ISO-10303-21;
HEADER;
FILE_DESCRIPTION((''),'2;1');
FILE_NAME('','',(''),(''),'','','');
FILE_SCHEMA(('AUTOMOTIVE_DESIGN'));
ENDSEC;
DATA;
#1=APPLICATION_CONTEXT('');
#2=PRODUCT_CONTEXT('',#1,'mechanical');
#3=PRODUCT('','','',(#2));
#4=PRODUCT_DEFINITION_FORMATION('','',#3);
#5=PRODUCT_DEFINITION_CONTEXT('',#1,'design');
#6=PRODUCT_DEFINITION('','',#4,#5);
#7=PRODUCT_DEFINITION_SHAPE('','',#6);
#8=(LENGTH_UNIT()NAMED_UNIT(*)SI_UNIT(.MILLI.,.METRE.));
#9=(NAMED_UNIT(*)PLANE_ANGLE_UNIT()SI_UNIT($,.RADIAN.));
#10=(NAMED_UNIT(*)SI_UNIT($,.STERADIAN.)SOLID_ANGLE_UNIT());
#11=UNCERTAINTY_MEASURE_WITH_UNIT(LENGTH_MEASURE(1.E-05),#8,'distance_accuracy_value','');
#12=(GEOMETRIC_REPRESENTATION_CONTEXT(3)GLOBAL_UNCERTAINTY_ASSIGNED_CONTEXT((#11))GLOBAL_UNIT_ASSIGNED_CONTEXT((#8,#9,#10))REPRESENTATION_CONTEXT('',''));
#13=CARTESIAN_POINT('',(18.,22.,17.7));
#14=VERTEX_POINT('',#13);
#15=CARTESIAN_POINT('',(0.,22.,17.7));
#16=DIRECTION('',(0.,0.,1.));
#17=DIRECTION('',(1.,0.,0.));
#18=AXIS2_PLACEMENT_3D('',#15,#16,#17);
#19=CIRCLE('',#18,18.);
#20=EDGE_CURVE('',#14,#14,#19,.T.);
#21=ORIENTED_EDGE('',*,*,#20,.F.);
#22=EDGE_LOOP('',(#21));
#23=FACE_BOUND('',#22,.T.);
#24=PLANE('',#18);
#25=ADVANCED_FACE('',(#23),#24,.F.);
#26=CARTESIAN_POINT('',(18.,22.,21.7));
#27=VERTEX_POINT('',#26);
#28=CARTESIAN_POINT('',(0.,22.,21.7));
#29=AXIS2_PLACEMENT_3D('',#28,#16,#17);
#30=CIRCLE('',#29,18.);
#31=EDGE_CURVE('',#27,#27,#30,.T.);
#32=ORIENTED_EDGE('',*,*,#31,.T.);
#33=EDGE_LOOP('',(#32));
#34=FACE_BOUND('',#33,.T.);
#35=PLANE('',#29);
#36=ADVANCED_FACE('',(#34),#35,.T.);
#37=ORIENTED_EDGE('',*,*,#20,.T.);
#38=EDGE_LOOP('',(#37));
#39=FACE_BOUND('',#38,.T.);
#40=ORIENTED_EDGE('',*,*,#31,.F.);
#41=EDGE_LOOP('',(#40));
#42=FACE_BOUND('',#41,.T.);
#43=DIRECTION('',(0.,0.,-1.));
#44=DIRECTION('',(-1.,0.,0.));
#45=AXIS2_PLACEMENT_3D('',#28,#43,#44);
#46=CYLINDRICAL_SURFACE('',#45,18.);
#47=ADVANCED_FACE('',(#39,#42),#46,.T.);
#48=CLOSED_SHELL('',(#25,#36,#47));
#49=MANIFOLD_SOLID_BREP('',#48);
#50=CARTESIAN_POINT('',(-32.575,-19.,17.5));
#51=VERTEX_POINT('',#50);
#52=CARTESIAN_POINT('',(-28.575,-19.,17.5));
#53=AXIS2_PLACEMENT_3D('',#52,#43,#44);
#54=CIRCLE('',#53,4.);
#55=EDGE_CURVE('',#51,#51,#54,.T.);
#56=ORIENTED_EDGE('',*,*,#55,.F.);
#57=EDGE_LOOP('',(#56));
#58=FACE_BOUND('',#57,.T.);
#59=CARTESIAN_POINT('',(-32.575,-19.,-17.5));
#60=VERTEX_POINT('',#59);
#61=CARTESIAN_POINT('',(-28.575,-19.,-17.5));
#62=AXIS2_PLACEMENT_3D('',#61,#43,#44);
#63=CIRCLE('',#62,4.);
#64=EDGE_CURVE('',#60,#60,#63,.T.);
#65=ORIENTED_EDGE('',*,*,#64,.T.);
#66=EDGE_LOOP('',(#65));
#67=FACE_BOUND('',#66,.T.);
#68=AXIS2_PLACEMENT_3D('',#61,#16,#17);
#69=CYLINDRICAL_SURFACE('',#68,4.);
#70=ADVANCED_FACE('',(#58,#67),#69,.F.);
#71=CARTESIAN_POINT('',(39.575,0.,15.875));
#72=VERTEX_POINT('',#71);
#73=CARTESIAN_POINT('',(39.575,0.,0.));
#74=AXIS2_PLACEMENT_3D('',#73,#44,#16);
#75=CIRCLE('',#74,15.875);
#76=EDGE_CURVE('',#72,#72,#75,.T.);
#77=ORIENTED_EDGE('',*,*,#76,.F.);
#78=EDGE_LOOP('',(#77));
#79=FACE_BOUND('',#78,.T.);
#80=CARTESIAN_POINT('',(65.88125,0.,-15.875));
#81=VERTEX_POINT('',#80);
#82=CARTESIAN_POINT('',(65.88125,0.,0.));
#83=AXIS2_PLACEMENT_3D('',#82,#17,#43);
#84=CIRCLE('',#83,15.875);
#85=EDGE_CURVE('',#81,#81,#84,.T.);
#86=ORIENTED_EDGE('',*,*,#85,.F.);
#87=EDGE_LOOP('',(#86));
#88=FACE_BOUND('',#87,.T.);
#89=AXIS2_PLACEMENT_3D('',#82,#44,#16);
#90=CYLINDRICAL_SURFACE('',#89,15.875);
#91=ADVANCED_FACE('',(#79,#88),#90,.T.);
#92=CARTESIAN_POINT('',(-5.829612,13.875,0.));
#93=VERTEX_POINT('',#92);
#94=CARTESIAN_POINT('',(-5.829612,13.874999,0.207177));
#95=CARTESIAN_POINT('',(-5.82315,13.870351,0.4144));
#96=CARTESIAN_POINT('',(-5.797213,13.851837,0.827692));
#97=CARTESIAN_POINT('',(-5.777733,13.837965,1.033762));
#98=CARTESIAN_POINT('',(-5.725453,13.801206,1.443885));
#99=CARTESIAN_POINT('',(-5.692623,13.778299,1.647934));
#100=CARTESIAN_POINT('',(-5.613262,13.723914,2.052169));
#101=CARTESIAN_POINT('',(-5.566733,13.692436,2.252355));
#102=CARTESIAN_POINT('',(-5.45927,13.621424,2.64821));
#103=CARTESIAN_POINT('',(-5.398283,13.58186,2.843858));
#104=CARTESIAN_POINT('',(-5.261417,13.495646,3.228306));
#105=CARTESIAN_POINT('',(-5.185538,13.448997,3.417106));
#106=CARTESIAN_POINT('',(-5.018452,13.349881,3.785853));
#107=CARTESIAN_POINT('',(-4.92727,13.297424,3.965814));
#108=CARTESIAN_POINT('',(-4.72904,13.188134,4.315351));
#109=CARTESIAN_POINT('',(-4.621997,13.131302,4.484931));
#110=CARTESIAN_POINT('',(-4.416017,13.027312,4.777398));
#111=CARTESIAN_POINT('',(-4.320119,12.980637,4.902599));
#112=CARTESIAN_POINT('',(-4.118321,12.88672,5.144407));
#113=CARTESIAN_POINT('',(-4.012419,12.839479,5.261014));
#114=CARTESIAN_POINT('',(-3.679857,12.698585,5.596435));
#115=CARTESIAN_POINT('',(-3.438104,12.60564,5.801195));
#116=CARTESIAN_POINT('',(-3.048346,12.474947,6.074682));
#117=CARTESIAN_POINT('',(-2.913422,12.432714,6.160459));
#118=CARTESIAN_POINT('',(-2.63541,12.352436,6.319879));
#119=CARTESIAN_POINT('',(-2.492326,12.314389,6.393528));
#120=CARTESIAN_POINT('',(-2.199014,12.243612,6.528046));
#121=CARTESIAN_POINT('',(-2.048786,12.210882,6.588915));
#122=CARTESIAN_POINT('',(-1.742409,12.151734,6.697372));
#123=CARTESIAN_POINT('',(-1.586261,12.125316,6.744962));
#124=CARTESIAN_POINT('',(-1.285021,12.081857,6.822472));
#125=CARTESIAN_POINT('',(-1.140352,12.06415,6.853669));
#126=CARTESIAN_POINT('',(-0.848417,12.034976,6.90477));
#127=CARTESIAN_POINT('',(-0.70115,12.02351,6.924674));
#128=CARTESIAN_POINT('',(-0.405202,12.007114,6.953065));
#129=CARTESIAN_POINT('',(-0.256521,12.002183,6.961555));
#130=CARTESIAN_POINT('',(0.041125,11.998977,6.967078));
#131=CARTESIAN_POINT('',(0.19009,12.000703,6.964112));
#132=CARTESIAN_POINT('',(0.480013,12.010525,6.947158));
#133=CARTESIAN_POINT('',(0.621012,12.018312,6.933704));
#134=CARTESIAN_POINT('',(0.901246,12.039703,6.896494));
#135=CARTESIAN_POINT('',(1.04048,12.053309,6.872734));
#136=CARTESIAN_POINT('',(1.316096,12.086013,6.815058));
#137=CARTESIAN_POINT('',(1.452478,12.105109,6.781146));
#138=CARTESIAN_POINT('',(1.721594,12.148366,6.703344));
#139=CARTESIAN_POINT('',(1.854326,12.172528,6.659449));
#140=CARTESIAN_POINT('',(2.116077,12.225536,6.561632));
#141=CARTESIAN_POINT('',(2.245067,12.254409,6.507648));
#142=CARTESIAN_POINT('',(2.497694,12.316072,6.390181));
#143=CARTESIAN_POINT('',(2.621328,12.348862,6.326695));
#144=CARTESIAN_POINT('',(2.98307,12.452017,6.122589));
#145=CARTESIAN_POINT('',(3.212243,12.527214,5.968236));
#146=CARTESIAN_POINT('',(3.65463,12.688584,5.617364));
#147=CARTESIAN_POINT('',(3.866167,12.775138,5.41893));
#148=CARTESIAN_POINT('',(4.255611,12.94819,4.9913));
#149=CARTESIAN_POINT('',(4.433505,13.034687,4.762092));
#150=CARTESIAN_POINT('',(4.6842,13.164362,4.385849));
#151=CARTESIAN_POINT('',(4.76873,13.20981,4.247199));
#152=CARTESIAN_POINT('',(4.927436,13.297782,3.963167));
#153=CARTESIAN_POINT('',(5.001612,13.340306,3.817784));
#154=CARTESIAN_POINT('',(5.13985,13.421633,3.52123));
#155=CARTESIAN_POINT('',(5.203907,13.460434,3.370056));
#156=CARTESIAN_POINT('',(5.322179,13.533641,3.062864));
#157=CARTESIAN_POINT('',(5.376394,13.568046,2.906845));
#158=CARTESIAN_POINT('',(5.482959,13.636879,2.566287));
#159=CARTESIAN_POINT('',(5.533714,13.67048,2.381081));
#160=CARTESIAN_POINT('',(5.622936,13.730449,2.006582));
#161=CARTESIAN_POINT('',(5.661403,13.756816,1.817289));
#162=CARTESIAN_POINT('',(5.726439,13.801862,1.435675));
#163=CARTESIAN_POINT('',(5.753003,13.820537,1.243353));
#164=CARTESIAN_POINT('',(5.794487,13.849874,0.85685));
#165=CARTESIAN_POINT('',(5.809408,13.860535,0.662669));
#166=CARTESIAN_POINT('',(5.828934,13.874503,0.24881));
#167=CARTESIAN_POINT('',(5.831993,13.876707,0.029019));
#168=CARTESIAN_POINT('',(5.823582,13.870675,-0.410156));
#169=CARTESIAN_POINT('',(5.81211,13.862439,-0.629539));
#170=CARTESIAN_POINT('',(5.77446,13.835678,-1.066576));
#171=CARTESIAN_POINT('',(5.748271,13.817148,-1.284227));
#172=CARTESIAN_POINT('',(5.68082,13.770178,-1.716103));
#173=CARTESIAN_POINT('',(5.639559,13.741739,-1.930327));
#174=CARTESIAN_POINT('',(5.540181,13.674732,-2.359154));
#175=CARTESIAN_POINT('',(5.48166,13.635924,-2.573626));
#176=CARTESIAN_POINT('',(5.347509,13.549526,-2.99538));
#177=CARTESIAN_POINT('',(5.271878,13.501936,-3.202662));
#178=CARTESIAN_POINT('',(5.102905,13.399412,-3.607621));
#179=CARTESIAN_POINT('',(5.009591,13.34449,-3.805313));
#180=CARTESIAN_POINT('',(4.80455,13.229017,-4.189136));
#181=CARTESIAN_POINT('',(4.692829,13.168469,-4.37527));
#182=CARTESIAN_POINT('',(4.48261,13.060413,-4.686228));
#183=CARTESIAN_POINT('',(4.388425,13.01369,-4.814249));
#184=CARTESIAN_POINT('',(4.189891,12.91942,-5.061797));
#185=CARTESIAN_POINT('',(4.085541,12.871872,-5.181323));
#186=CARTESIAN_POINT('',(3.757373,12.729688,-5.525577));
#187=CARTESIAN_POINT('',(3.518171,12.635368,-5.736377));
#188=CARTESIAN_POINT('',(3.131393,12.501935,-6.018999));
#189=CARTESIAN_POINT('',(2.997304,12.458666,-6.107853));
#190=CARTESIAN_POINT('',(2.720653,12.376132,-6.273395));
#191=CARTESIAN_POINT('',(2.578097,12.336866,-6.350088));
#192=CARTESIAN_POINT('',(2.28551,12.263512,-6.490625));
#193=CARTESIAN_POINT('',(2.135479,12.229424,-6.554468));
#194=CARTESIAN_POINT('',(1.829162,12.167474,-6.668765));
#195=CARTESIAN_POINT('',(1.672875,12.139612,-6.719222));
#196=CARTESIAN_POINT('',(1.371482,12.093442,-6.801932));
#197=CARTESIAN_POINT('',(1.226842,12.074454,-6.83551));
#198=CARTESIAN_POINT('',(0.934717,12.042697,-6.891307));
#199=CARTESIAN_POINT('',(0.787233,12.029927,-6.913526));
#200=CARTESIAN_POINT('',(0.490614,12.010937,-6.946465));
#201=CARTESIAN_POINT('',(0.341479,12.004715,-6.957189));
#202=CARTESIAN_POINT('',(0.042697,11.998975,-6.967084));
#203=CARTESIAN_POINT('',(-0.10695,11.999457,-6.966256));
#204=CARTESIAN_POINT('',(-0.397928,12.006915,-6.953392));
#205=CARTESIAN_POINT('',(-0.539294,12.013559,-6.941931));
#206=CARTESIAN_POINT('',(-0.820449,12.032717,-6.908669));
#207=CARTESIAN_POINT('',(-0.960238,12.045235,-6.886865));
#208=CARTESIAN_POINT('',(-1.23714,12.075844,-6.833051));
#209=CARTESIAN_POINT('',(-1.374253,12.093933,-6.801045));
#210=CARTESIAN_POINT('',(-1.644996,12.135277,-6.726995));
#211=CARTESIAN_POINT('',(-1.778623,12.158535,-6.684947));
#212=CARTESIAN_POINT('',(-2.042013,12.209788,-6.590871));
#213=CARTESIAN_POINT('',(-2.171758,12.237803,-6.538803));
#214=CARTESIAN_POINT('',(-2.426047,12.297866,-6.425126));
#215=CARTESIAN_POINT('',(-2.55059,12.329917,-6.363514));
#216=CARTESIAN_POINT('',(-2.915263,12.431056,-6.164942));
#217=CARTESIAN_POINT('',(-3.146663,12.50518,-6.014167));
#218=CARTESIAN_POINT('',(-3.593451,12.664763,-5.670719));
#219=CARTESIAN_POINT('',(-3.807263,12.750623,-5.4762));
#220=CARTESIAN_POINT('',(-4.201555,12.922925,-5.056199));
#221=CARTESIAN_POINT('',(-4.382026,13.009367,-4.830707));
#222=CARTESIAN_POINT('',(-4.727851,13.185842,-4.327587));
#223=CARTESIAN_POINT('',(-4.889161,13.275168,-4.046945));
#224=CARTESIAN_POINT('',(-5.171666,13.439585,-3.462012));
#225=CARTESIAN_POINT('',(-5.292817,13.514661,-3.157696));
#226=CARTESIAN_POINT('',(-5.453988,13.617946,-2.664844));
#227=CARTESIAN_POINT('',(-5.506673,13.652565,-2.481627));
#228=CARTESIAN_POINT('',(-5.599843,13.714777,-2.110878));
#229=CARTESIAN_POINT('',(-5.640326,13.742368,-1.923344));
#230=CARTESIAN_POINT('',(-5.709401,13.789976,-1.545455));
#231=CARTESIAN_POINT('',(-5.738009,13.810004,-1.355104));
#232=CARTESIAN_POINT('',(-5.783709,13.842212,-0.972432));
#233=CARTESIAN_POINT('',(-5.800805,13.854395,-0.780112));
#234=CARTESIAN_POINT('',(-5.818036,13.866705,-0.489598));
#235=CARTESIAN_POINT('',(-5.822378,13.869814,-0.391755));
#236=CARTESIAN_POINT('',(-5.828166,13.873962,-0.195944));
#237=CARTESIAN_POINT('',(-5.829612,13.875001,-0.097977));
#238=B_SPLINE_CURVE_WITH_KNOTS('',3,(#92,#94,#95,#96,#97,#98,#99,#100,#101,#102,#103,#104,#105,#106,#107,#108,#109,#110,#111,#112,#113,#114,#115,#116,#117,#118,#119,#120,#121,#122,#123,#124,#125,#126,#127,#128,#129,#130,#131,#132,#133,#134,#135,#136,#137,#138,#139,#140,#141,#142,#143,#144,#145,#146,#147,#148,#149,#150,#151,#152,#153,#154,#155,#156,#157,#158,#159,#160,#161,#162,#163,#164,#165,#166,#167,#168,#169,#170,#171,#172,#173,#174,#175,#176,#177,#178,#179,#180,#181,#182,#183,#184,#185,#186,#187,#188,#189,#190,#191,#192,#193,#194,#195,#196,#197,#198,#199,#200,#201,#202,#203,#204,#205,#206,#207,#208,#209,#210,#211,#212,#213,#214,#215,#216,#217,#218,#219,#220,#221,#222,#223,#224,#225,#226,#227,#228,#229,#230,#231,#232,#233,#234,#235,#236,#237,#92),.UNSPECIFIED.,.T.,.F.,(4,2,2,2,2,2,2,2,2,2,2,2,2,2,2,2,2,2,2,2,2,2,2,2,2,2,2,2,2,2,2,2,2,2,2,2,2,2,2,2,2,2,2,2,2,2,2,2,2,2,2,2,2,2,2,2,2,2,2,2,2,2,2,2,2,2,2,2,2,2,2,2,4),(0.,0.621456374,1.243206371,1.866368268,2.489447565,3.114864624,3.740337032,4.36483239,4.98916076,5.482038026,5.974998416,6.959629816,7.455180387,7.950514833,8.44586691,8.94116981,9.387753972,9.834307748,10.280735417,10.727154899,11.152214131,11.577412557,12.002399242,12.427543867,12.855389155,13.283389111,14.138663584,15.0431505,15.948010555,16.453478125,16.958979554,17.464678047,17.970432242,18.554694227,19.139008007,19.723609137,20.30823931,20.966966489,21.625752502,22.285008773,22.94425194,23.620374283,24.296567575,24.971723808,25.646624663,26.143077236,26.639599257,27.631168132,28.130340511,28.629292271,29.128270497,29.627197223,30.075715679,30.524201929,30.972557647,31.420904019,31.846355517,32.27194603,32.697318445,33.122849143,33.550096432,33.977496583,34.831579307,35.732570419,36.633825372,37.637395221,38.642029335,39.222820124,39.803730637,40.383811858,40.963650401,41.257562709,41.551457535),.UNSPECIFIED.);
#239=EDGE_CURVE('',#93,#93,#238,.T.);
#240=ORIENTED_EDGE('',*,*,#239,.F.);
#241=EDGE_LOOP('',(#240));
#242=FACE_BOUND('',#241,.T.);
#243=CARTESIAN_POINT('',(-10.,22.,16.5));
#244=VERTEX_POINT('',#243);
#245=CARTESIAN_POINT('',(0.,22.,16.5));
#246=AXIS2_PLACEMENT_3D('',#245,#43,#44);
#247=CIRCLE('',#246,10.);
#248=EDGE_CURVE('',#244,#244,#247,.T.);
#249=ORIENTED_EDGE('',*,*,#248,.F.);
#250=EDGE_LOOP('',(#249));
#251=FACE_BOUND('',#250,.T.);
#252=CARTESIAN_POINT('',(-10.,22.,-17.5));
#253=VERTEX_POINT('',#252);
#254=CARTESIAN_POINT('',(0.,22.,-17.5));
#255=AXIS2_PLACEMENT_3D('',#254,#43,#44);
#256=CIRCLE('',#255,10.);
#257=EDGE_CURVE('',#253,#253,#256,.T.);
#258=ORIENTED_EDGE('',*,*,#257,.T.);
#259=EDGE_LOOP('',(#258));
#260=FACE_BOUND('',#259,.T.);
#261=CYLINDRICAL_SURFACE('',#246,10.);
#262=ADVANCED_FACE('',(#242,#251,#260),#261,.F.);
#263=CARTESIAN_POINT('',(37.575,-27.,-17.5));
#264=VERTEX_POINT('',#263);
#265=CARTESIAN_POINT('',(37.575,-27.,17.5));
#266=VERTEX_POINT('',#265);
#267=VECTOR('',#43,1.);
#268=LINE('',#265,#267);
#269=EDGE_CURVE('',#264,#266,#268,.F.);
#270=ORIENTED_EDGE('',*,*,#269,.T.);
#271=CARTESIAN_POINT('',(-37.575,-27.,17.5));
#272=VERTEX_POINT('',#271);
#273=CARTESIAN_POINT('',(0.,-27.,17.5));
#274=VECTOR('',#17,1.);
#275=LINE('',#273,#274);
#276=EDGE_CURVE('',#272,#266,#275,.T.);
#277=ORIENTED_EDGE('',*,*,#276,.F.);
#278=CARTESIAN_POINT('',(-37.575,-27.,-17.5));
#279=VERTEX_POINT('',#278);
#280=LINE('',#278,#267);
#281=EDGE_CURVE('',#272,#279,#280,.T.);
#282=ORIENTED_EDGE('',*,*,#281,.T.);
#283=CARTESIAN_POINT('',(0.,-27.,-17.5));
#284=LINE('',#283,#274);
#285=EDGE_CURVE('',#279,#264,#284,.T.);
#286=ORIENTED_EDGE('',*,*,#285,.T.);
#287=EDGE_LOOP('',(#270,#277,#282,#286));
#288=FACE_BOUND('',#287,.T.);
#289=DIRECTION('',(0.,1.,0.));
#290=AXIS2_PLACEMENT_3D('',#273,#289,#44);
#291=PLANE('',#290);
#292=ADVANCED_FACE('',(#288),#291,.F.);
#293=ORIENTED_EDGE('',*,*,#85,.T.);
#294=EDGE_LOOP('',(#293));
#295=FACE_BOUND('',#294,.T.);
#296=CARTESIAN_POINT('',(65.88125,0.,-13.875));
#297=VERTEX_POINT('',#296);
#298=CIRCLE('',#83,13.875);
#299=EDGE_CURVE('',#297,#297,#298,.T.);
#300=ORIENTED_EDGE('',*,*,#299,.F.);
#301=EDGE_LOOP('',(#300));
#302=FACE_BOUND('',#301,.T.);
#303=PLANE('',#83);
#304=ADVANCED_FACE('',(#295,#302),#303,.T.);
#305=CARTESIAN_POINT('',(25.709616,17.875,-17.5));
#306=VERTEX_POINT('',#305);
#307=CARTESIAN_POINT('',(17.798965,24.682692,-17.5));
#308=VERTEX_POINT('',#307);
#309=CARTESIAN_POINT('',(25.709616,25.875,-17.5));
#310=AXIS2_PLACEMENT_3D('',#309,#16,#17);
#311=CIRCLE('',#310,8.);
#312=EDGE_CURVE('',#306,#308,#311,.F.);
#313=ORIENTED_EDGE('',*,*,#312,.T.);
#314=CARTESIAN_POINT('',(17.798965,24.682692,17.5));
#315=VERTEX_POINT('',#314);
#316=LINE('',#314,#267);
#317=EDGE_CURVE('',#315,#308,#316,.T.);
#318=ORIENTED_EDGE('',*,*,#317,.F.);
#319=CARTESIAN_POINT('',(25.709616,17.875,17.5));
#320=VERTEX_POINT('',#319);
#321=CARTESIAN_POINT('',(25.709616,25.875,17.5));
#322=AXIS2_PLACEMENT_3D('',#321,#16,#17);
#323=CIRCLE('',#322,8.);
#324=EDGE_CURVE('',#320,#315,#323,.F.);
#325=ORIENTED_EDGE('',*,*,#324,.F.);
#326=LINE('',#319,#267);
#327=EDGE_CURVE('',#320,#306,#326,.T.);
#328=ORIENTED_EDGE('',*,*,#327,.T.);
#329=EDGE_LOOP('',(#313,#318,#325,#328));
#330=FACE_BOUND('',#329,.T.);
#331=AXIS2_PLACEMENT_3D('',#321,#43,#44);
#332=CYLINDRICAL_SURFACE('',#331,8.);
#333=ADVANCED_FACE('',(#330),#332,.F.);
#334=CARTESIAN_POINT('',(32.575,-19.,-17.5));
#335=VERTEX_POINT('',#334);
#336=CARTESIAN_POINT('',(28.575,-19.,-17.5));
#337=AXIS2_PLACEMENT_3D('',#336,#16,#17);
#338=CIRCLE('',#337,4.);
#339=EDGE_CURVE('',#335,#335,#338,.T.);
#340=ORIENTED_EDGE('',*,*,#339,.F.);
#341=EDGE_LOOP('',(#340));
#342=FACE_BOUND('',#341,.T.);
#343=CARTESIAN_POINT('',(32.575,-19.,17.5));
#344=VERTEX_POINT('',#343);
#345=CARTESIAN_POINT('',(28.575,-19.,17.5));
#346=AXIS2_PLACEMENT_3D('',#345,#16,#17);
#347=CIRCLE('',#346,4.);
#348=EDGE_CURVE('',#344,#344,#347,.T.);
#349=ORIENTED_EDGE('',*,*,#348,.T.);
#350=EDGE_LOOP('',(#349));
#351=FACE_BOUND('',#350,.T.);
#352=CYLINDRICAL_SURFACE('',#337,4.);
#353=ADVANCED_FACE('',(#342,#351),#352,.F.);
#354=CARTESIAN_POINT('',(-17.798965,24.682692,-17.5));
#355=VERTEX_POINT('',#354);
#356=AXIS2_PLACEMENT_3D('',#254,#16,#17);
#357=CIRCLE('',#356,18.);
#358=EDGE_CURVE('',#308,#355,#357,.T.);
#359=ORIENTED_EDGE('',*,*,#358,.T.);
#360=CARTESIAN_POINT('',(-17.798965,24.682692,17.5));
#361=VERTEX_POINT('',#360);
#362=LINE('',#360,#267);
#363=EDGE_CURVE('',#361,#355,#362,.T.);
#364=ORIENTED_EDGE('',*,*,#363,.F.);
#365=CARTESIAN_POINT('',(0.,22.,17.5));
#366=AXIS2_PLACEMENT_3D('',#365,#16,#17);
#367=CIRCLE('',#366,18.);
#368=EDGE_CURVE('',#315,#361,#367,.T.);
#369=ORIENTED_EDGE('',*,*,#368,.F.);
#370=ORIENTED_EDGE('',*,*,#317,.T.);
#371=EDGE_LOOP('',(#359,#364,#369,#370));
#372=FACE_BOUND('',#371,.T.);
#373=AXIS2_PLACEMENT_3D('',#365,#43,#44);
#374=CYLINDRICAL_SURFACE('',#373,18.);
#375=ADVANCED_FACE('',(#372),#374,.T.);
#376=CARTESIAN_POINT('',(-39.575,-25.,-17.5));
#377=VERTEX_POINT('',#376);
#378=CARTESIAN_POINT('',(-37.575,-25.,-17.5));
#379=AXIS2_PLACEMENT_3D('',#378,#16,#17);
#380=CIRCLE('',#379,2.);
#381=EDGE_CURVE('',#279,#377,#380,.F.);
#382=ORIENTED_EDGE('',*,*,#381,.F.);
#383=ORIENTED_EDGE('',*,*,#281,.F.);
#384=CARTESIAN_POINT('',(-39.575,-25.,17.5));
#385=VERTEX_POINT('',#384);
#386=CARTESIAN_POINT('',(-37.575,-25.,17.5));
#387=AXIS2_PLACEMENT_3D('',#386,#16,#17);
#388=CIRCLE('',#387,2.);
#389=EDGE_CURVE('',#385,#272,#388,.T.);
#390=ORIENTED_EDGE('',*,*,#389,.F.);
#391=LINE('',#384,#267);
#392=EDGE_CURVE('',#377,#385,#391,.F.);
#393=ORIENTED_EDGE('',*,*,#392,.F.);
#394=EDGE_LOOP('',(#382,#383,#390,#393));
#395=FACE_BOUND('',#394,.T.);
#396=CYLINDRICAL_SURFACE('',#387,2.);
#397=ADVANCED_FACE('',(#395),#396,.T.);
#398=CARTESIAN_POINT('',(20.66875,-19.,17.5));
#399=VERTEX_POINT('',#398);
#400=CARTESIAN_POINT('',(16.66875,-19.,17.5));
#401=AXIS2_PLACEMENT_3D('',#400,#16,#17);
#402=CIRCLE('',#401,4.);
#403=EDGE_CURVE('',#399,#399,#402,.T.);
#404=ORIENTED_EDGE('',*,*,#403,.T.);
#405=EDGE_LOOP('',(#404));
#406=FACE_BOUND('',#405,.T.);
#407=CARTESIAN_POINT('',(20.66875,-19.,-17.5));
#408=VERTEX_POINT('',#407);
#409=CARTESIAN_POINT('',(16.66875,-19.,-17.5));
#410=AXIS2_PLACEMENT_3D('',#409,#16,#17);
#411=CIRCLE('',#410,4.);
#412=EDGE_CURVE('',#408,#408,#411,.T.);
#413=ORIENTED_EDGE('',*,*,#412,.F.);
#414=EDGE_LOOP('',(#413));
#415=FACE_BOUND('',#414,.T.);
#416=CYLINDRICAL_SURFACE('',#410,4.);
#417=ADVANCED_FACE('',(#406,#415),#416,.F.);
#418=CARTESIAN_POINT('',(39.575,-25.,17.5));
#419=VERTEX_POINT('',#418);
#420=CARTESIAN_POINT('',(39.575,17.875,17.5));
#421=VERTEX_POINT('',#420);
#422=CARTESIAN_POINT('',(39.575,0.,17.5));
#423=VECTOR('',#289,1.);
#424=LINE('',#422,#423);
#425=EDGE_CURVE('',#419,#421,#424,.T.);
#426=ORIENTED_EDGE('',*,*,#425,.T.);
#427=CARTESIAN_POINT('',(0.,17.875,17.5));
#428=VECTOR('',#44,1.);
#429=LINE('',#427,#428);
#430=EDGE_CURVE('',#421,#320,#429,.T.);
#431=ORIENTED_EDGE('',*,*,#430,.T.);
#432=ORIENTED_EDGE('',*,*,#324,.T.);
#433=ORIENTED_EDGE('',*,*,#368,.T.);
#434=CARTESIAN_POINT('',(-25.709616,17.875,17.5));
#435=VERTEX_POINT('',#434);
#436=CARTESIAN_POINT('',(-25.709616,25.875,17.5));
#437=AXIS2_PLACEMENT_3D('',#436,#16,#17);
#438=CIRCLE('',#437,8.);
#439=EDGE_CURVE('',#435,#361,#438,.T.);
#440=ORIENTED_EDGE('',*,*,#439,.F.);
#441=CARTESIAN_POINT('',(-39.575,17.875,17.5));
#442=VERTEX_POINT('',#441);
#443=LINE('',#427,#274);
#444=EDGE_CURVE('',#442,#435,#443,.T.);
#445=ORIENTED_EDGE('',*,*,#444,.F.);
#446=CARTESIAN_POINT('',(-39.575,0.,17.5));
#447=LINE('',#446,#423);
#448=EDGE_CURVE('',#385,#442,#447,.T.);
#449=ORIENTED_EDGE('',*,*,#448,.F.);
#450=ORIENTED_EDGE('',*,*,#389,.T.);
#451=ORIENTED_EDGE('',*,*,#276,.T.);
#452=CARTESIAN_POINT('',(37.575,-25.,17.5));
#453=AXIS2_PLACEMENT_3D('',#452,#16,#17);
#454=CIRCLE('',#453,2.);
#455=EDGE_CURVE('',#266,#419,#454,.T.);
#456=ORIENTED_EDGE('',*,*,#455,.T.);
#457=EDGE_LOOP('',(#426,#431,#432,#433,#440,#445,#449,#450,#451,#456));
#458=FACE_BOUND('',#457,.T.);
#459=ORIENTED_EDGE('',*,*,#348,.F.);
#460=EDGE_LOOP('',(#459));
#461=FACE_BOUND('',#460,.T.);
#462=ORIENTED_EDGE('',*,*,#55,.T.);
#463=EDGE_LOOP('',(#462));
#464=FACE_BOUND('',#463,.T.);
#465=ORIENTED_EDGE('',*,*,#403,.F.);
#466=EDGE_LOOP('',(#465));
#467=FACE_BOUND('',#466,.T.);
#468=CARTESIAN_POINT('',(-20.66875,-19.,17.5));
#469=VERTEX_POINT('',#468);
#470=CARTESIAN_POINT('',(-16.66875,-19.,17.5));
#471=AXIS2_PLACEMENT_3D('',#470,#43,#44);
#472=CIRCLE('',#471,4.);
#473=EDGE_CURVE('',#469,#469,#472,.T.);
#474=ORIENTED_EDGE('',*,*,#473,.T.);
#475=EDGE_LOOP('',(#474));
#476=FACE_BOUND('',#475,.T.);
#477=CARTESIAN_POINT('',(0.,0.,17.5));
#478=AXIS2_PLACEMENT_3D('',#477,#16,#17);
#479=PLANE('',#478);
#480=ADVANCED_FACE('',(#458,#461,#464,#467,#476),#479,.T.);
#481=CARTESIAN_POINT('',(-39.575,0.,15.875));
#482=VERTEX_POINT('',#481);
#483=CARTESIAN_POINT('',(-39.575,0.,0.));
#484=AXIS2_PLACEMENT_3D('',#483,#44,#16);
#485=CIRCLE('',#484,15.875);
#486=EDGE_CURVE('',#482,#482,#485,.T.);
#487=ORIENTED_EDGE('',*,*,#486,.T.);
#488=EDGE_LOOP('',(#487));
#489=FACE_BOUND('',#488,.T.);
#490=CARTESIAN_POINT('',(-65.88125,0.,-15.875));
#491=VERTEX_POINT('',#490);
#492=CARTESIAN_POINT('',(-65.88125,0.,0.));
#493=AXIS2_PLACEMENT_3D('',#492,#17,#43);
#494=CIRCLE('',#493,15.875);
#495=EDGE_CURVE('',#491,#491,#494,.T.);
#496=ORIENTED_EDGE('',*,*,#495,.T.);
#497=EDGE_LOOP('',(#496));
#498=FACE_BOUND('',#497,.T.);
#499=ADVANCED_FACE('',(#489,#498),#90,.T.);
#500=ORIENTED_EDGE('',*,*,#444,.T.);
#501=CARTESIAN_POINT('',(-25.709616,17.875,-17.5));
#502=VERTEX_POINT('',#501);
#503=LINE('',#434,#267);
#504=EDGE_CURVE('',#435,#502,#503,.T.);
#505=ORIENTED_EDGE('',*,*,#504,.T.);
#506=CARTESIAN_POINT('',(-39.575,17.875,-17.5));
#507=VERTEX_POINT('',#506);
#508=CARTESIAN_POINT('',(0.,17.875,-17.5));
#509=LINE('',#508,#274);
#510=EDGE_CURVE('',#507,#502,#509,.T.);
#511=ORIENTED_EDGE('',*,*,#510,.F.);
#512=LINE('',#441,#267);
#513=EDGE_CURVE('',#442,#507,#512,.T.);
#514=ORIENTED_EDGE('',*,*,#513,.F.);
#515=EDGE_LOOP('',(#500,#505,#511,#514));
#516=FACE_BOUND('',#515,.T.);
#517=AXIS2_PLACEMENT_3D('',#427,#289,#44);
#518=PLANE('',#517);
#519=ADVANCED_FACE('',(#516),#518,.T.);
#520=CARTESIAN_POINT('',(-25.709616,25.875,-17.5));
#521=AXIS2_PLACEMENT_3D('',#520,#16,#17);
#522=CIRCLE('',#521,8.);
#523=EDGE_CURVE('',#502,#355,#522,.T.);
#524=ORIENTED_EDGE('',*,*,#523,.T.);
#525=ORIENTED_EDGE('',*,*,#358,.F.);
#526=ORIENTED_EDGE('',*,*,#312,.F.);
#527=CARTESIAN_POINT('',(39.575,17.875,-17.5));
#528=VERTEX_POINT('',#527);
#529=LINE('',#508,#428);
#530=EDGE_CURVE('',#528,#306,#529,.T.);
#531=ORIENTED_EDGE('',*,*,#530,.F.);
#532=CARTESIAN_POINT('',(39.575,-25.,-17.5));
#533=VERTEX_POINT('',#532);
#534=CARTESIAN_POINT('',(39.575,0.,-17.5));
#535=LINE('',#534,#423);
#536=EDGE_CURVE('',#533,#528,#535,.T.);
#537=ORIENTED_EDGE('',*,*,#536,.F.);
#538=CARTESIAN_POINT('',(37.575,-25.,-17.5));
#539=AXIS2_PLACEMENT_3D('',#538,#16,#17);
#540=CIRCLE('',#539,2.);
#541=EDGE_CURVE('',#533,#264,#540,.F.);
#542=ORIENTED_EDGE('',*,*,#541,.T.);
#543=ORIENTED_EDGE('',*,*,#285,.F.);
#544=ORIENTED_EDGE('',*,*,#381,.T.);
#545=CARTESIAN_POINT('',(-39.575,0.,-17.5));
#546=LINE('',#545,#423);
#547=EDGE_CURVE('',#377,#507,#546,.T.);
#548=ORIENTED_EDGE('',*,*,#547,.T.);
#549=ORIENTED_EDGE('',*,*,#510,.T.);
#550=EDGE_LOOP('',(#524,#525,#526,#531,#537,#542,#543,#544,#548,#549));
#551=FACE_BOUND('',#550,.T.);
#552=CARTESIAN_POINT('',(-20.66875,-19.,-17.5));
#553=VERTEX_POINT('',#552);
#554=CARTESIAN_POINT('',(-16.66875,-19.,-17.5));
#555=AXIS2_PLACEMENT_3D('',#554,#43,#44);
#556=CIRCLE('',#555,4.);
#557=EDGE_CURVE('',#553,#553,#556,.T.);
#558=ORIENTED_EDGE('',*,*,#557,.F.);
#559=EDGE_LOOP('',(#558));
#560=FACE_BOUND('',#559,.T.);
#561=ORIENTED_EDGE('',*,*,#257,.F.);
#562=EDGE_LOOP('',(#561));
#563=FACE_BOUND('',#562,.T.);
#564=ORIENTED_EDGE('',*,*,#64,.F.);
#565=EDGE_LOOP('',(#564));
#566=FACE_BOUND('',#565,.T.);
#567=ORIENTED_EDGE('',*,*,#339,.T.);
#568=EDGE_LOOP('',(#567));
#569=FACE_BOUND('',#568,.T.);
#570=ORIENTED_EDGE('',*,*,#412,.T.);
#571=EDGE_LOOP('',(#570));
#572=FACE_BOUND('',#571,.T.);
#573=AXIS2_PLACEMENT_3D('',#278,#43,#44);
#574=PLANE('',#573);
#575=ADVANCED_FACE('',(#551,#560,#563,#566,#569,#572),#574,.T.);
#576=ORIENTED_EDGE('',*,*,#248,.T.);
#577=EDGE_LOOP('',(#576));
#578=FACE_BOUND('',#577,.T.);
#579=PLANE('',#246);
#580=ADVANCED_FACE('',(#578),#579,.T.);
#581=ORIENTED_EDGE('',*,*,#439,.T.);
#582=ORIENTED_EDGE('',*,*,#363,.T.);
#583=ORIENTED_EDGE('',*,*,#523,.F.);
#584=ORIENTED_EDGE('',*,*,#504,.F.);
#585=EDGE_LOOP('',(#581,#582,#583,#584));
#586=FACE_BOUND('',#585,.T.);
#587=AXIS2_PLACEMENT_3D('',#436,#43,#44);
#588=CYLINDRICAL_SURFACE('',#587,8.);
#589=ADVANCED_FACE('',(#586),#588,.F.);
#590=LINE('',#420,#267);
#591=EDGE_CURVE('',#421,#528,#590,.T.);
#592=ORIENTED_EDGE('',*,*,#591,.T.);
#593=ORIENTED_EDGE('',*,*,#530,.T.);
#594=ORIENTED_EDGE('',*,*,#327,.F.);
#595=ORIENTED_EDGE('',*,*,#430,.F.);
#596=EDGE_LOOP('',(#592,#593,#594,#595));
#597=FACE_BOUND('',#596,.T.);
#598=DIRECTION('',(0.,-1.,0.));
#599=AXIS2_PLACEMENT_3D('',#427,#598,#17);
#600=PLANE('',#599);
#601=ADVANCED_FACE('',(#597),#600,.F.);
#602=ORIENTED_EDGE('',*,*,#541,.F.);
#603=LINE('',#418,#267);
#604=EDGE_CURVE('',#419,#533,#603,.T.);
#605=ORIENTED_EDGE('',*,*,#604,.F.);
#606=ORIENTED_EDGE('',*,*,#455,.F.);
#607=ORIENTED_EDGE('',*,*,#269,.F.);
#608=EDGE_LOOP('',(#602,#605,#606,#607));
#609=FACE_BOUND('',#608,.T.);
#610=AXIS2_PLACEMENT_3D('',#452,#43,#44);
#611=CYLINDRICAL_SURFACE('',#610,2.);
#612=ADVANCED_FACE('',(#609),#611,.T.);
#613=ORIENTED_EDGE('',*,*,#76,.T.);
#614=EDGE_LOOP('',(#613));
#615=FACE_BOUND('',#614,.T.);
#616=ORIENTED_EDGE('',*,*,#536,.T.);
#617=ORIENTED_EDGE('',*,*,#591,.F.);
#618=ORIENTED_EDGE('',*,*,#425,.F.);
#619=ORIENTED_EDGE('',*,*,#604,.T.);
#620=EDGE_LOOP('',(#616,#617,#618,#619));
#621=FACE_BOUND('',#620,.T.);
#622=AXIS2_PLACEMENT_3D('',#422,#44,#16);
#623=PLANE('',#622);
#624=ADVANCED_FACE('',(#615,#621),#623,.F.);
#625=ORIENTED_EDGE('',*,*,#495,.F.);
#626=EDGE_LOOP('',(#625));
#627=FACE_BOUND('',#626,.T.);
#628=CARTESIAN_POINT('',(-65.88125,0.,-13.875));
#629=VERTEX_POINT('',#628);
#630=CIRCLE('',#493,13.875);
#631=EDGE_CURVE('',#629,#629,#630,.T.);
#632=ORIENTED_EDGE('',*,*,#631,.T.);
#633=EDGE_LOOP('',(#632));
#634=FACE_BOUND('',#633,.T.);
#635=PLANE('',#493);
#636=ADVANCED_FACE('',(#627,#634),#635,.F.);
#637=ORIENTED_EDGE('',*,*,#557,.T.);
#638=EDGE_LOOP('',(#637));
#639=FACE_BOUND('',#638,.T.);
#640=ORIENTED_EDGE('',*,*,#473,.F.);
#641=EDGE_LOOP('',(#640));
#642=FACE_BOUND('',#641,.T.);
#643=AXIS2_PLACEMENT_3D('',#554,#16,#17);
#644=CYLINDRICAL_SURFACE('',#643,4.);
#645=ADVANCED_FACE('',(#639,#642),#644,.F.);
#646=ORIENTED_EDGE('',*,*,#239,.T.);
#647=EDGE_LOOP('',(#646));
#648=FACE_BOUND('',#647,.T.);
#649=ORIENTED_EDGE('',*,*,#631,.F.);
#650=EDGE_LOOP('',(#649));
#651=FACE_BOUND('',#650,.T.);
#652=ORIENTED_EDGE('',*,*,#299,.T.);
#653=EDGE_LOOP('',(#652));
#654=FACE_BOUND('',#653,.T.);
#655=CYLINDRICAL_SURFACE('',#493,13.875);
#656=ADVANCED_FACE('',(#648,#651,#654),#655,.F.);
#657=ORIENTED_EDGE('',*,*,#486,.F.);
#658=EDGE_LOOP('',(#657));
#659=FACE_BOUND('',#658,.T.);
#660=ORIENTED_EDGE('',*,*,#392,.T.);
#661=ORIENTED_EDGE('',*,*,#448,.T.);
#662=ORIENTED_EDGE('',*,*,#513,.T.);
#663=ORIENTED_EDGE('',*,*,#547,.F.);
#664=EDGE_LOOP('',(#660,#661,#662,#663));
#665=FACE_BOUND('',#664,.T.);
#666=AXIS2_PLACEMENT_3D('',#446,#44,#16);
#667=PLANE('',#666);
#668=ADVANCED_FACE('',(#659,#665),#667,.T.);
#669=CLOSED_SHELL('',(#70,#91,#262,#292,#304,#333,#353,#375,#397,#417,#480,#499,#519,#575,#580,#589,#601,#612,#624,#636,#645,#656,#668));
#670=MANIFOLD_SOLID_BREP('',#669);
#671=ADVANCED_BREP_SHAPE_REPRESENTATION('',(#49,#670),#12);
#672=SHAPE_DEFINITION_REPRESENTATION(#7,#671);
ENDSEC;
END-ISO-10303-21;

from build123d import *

# Parameters (mm, degrees)
SKETCH2_R               = 15.875
SKETCH2_R_2             = 13.875
BOSS_EXTRUDE1_DEPTH     = 65.88125
SKETCH3_R               = 4
BOSS_EXTRUDE2_DEPTH     = 17.5
CUT_EXTRUDE1_DEPTH      = 80.035366144
CUT_EXTRUDE1_DEPTH_BACK = 80.035366144
SKETCH2_3_R             = 13.875
CUT_EXTRUDE2_DEPTH      = 80.035366144
CUT_EXTRUDE2_DEPTH_BACK = 80.035366144
SKETCH3_3_R             = 4
FILLET1_R               = 2
BOSS_EXTRUDE3_START     = 0.2
SKETCH4_R               = 18
BOSS_EXTRUDE3_DEPTH     = 4
SKETCH5_R               = 7.9375
BOSS_EXTRUDE4_DEPTH     = 40
CHAMFER1_SIZE           = 1
CUT_EXTRUDE3_START      = -25
CUT_EXTRUDE3_DEPTH      = 25
SKETCH8_R               = 10
CUT_EXTRUDE4_DEPTH      = 34


# Read off the part's stored shape, not the designer's step: Split1
with BuildPart() as part:
    # Sketch2 → Boss-Extrude1 (new, symmetric)
    # profile 1 of 2: a face of its own
    with BuildSketch(Plane(origin=(0, 0, 0), x_dir=(0, 0, -1), z_dir=(1, 0, 0))):
        Circle(SKETCH2_R)
        Circle(SKETCH2_R_2, mode=Mode.SUBTRACT)
    # profile 2 of 2: a face of its own
    with BuildSketch(Plane(origin=(0, 0, 0), x_dir=(0, 0, -1), z_dir=(1, 0, 0))):
        Circle(SKETCH2_R_2)
    extrude(amount=BOSS_EXTRUDE1_DEPTH, both=True)

    # Sketch3 → Boss-Extrude2 (add, symmetric)
    # profile 1 of 6: a face of its own
    with BuildSketch(Plane.XY):
        with BuildLine():
            Line((0, -27), (0, 40))
            ThreePointArc((0, 40), (-11.74119965, 35.643468429), (-17.798965194, 24.682692308))
            ThreePointArc((-17.798965194, 24.682692308), (-20.491305436, 19.811236254), (-25.709616392, 17.875))
            Line((-25.709616392, 17.875), (-39.575, 17.875))
            Line((-39.575, 17.875), (-39.575, -27))
            Line((-39.575, -27), (0, -27))
        make_face()
        with Locations((-28.575, -19)):
            Circle(SKETCH3_R, mode=Mode.SUBTRACT)
        with Locations((-16.66875, -19)):
            Circle(SKETCH3_R, mode=Mode.SUBTRACT)
    # profile 2 of 6: a face of its own
    with BuildSketch(Plane.XY):
        with Locations((-28.575, -19)):
            Circle(SKETCH3_R)
    # profile 3 of 6: a face of its own
    with BuildSketch(Plane.XY):
        with Locations((-16.66875, -19)):
            Circle(SKETCH3_R)
    # profile 4 of 6: a face of its own
    with BuildSketch(Plane.XY):
        with BuildLine():
            ThreePointArc((17.798965194, 24.682692308), (11.74119965, 35.643468429), (0, 40))
            Line((0, 40), (0, -27))
            Line((0, -27), (39.575, -27))
            Line((39.575, -27), (39.575, 17.875))
            Line((39.575, 17.875), (25.709616392, 17.875))
            ThreePointArc((25.709616392, 17.875), (20.491305436, 19.811236254), (17.798965194, 24.682692308))
        make_face()
        with Locations((16.66875, -19)):
            Circle(SKETCH3_R, mode=Mode.SUBTRACT)
        with Locations((28.575, -19)):
            Circle(SKETCH3_R, mode=Mode.SUBTRACT)
    # profile 5 of 6: a face of its own
    with BuildSketch(Plane.XY):
        with Locations((28.575, -19)):
            Circle(SKETCH3_R)
    # profile 6 of 6: a face of its own
    with BuildSketch(Plane.XY):
        with Locations((16.66875, -19)):
            Circle(SKETCH3_R)
    extrude(amount=BOSS_EXTRUDE2_DEPTH, both=True)

    # Sketch2<3> → Cut-Extrude1 (cut, two sides: drawn at the far end of the back side and taken through both)
    with BuildSketch(Plane(origin=(0, 0, 0), x_dir=(0, 0, -1), z_dir=(1, 0, 0)).offset(-CUT_EXTRUDE1_DEPTH_BACK)):
        Circle(SKETCH2_3_R)
    extrude(amount=CUT_EXTRUDE1_DEPTH + CUT_EXTRUDE1_DEPTH_BACK, mode=Mode.SUBTRACT)

    # Sketch3<3> → Cut-Extrude2 (cut, two sides: drawn at the far end of the back side and taken through both)
    with BuildSketch(Plane.XY.offset(-CUT_EXTRUDE2_DEPTH_BACK)):
        with Locations((16.66875, -19)):
            Circle(SKETCH3_3_R)
        with Locations((28.575, -19)):
            Circle(SKETCH3_3_R)
        with Locations(Location((-28.575, -19, 0), (0, 0, 180))):
            Circle(SKETCH3_3_R)
        with Locations(Location((-16.66875, -19, 0), (0, 0, 180))):
            Circle(SKETCH3_3_R)
    extrude(amount=CUT_EXTRUDE2_DEPTH + CUT_EXTRUDE2_DEPTH_BACK, mode=Mode.SUBTRACT)

    # Fillet1
    fillet1_edges = [part.edges().sort_by_distance(p)[0] for p in [
        (39.575, -27, 0),
        (-39.575, -27, 0),
    ]]
    fillet(fillet1_edges, radius=FILLET1_R)

    # Sketch5 → Boss-Extrude4 (add)
    with BuildSketch(Plane(origin=(0, 0, -17.5), x_dir=(-1, 0, 0), z_dir=(0, 0, -1))):
        with Locations(Location((0, 22, 0), (0, 0, 180))):
            Circle(SKETCH5_R)
    extrude(amount=BOSS_EXTRUDE4_DEPTH)

    # Chamfer1
    chamfer1_edges = [part.edges().sort_by_distance(p)[0] for p in [
        (-7.9375, 22, -57.5),
    ]]
    chamfer(chamfer1_edges, length=CHAMFER1_SIZE)

    # Sketch6 → Cut-Revolve1 (revolve, cut)
    with BuildSketch(Plane(origin=(0, 0, 0), x_dir=(0, 0, -1), z_dir=(1, 0, 0)), mode=Mode.PRIVATE) as cut_revolve1_sk:
        with BuildLine():
            Line((49.5, 29.9375), (45.027864045, 29.9375))
            ThreePointArc((45.027864045, 29.9375), (47.263932023, 28.9375), (49.5, 29.9375))
        make_face()
    revolve(cut_revolve1_sk.sketch.rotate(Axis((0, 22, -57.5), (0, 0, 1)), 90), axis=Axis((0, 22, -57.5), (0, 0, 1)), mode=Mode.SUBTRACT)

    # Sketch7 → Cut-Extrude3 (cut)
    with BuildSketch(Plane(origin=(0, 0, -57.5), x_dir=(-1, 0, 0), z_dir=(0, 0, -1)).offset(CUT_EXTRUDE3_START)):
        with BuildLine():
            Line((0, 29.4375), (0.4, 29.927414853))
            ThreePointArc((0.4, 29.927414853), (0, 29.9375), (-0.4, 29.927414853))
            Line((-0.4, 29.927414853), (0, 29.4375))
        make_face()
        with BuildLine():
            Line((1.291508321, 29.324507663), (1.770504244, 29.737520337))
            ThreePointArc((1.770504244, 29.737520337), (1.37833241, 29.81691154), (0.982658042, 29.87643888))
            Line((0.982658042, 29.87643888), (1.291508321, 29.324507663))
        make_face()
        with BuildLine():
            Line((2.543774816, 28.988963867), (3.087212613, 29.312525182))
            ThreePointArc((3.087212613, 29.312525182), (2.714784888, 29.458810177), (2.335458516, 29.586141297))
            Line((2.335458516, 29.586141297), (2.543774816, 28.988963867))
        make_face()
        with BuildLine():
            Line((3.71875, 28.441063941), (4.310117588, 28.665342649))
            ThreePointArc((4.310117588, 28.665342649), (3.96875, 28.874076643), (3.617297265, 29.065342649))
            Line((3.617297265, 29.065342649), (3.71875, 28.441063941))
        make_face()
        with BuildLine():
            Line((4.780732847, 27.697455546), (5.402061822, 27.815637052))
            ThreePointArc((5.402061822, 27.815637052), (5.102126652, 28.080477767), (4.789226267, 28.32986714))
            Line((4.789226267, 28.32986714), (4.780732847, 27.697455546))
        make_face()
        with BuildLine():
            Line((5.697455546, 26.780732847), (6.32986714, 26.789226267))
            ThreePointArc((6.32986714, 26.789226267), (6.080477767, 27.102126652), (5.815637052, 27.402061822))
            Line((5.815637052, 27.402061822), (5.697455546, 26.780732847))
        make_face()
        with BuildLine():
            Line((6.441063941, 25.71875), (7.065342649, 25.617297265))
            ThreePointArc((7.065342649, 25.617297265), (6.874076643, 25.96875), (6.665342649, 26.310117588))
            Line((6.665342649, 26.310117588), (6.441063941, 25.71875))
        make_face()
        with BuildLine():
            Line((6.988963867, 24.543774816), (7.586141297, 24.335458516))
            ThreePointArc((7.586141297, 24.335458516), (7.458810177, 24.714784888), (7.312525182, 25.087212613))
            Line((7.312525182, 25.087212613), (6.988963867, 24.543774816))
        make_face()
        with BuildLine():
            Line((7.324507663, 23.291508321), (7.87643888, 22.982658042))
            ThreePointArc((7.87643888, 22.982658042), (7.81691154, 23.37833241), (7.737520337, 23.770504244))
            Line((7.737520337, 23.770504244), (7.324507663, 23.291508321))
        make_face()
        with BuildLine():
            Line((7.4375, 22), (7.927414853, 21.6))
            ThreePointArc((7.927414853, 21.6), (7.9375, 22), (7.927414853, 22.4))
            Line((7.927414853, 22.4), (7.4375, 22))
        make_face()
        with BuildLine():
            Line((7.324507663, 20.708491679), (7.737520337, 20.229495756))
            ThreePointArc((7.737520337, 20.229495756), (7.81691154, 20.62166759), (7.87643888, 21.017341958))
            Line((7.87643888, 21.017341958), (7.324507663, 20.708491679))
        make_face()
        with BuildLine():
            Line((6.988963867, 19.456225184), (7.312525182, 18.912787387))
            ThreePointArc((7.312525182, 18.912787387), (7.458810177, 19.285215112), (7.586141297, 19.664541484))
            Line((7.586141297, 19.664541484), (6.988963867, 19.456225184))
        make_face()
        with BuildLine():
            Line((6.441063941, 18.28125), (6.665342649, 17.689882412))
            ThreePointArc((6.665342649, 17.689882412), (6.874076643, 18.03125), (7.065342649, 18.382702735))
            Line((7.065342649, 18.382702735), (6.441063941, 18.28125))
        make_face()
        with BuildLine():
            Line((5.697455546, 17.219267153), (5.815637052, 16.597938178))
            ThreePointArc((5.815637052, 16.597938178), (6.080477767, 16.897873348), (6.32986714, 17.210773733))
            Line((6.32986714, 17.210773733), (5.697455546, 17.219267153))
        make_face()
        with BuildLine():
            Line((4.780732847, 16.302544454), (4.789226267, 15.67013286))
            ThreePointArc((4.789226267, 15.67013286), (5.102126652, 15.919522233), (5.402061822, 16.184362948))
            Line((5.402061822, 16.184362948), (4.780732847, 16.302544454))
        make_face()
        with BuildLine():
            Line((3.71875, 15.558936059), (3.617297265, 14.934657351))
            ThreePointArc((3.617297265, 14.934657351), (3.96875, 15.125923357), (4.310117588, 15.334657351))
            Line((4.310117588, 15.334657351), (3.71875, 15.558936059))
        make_face()
        with BuildLine():
            Line((2.543774816, 15.011036133), (2.335458516, 14.413858703))
            ThreePointArc((2.335458516, 14.413858703), (2.714784888, 14.541189823), (3.087212613, 14.687474818))
            Line((3.087212613, 14.687474818), (2.543774816, 15.011036133))
        make_face()
        with BuildLine():
            Line((1.291508321, 14.675492337), (0.982658042, 14.12356112))
            ThreePointArc((0.982658042, 14.12356112), (1.37833241, 14.18308846), (1.770504244, 14.262479663))
            Line((1.770504244, 14.262479663), (1.291508321, 14.675492337))
        make_face()
        with BuildLine():
            Line((0, 14.5625), (-0.4, 14.072585147))
            ThreePointArc((-0.4, 14.072585147), (0, 14.0625), (0.4, 14.072585147))
            Line((0.4, 14.072585147), (0, 14.5625))
        make_face()
        with BuildLine():
            Line((-1.291508321, 14.675492337), (-1.770504244, 14.262479663))
            ThreePointArc((-1.770504244, 14.262479663), (-1.37833241, 14.18308846), (-0.982658042, 14.12356112))
            Line((-0.982658042, 14.12356112), (-1.291508321, 14.675492337))
        make_face()
        with BuildLine():
            Line((-2.543774816, 15.011036133), (-3.087212613, 14.687474818))
            ThreePointArc((-3.087212613, 14.687474818), (-2.714784888, 14.541189823), (-2.335458516, 14.413858703))
            Line((-2.335458516, 14.413858703), (-2.543774816, 15.011036133))
        make_face()
        with BuildLine():
            Line((-3.71875, 15.558936059), (-4.310117588, 15.334657351))
            ThreePointArc((-4.310117588, 15.334657351), (-3.96875, 15.125923357), (-3.617297265, 14.934657351))
            Line((-3.617297265, 14.934657351), (-3.71875, 15.558936059))
        make_face()
        with BuildLine():
            Line((-4.780732847, 16.302544454), (-5.402061822, 16.184362948))
            ThreePointArc((-5.402061822, 16.184362948), (-5.102126652, 15.919522233), (-4.789226267, 15.67013286))
            Line((-4.789226267, 15.67013286), (-4.780732847, 16.302544454))
        make_face()
        with BuildLine():
            Line((-5.697455546, 17.219267153), (-6.32986714, 17.210773733))
            ThreePointArc((-6.32986714, 17.210773733), (-6.080477767, 16.897873348), (-5.815637052, 16.597938178))
            Line((-5.815637052, 16.597938178), (-5.697455546, 17.219267153))
        make_face()
        with BuildLine():
            Line((-6.441063941, 18.28125), (-7.065342649, 18.382702735))
            ThreePointArc((-7.065342649, 18.382702735), (-6.874076643, 18.03125), (-6.665342649, 17.689882412))
            Line((-6.665342649, 17.689882412), (-6.441063941, 18.28125))
        make_face()
        with BuildLine():
            Line((-6.988963867, 19.456225184), (-7.586141297, 19.664541484))
            ThreePointArc((-7.586141297, 19.664541484), (-7.458810177, 19.285215112), (-7.312525182, 18.912787387))
            Line((-7.312525182, 18.912787387), (-6.988963867, 19.456225184))
        make_face()
        with BuildLine():
            Line((-7.324507663, 20.708491679), (-7.87643888, 21.017341958))
            ThreePointArc((-7.87643888, 21.017341958), (-7.81691154, 20.62166759), (-7.737520337, 20.229495756))
            Line((-7.737520337, 20.229495756), (-7.324507663, 20.708491679))
        make_face()
        with BuildLine():
            Line((-7.4375, 22), (-7.927414853, 22.4))
            ThreePointArc((-7.927414853, 22.4), (-7.9375, 22), (-7.927414853, 21.6))
            Line((-7.927414853, 21.6), (-7.4375, 22))
        make_face()
        with BuildLine():
            Line((-7.324507663, 23.291508321), (-7.737520337, 23.770504244))
            ThreePointArc((-7.737520337, 23.770504244), (-7.81691154, 23.37833241), (-7.87643888, 22.982658042))
            Line((-7.87643888, 22.982658042), (-7.324507663, 23.291508321))
        make_face()
        with BuildLine():
            Line((-6.988963867, 24.543774816), (-7.312525182, 25.087212613))
            ThreePointArc((-7.312525182, 25.087212613), (-7.458810177, 24.714784888), (-7.586141297, 24.335458516))
            Line((-7.586141297, 24.335458516), (-6.988963867, 24.543774816))
        make_face()
        with BuildLine():
            Line((-6.441063941, 25.71875), (-6.665342649, 26.310117588))
            ThreePointArc((-6.665342649, 26.310117588), (-6.874076643, 25.96875), (-7.065342649, 25.617297265))
            Line((-7.065342649, 25.617297265), (-6.441063941, 25.71875))
        make_face()
        with BuildLine():
            Line((-5.697455546, 26.780732847), (-5.815637052, 27.402061822))
            ThreePointArc((-5.815637052, 27.402061822), (-6.080477767, 27.102126652), (-6.32986714, 26.789226267))
            Line((-6.32986714, 26.789226267), (-5.697455546, 26.780732847))
        make_face()
        with BuildLine():
            Line((-4.780732847, 27.697455546), (-4.789226267, 28.32986714))
            ThreePointArc((-4.789226267, 28.32986714), (-5.102126652, 28.080477767), (-5.402061822, 27.815637052))
            Line((-5.402061822, 27.815637052), (-4.780732847, 27.697455546))
        make_face()
        with BuildLine():
            Line((-3.71875, 28.441063941), (-3.617297265, 29.065342649))
            ThreePointArc((-3.617297265, 29.065342649), (-3.96875, 28.874076643), (-4.310117588, 28.665342649))
            Line((-4.310117588, 28.665342649), (-3.71875, 28.441063941))
        make_face()
        with BuildLine():
            Line((-2.543774816, 28.988963867), (-2.335458516, 29.586141297))
            ThreePointArc((-2.335458516, 29.586141297), (-2.714784888, 29.458810177), (-3.087212613, 29.312525182))
            Line((-3.087212613, 29.312525182), (-2.543774816, 28.988963867))
        make_face()
        with BuildLine():
            Line((-1.291508321, 29.324507663), (-0.982658042, 29.87643888))
            ThreePointArc((-0.982658042, 29.87643888), (-1.37833241, 29.81691154), (-1.770504244, 29.737520337))
            Line((-1.770504244, 29.737520337), (-1.291508321, 29.324507663))
        make_face()
    extrude(amount=CUT_EXTRUDE3_DEPTH, mode=Mode.SUBTRACT)


with BuildPart() as body_2:
    # Sketch4 → Boss-Extrude3 (new body)
    with BuildSketch(Plane.XY.offset(17.5).offset(BOSS_EXTRUDE3_START)):
        with Locations((0, 22)):
            Circle(SKETCH4_R)
    extrude(amount=BOSS_EXTRUDE3_DEPTH)


with BuildPart() as body_3:
    # Split1: the piece on the far side of the plane
    add(part.part)
    split(bisect_by=Plane.XY.offset(-17.5), keep=Keep.BOTTOM)


with BuildPart() as part_1:
    add(part.part)

    # Split1
    split(bisect_by=Plane.XY.offset(-17.5), keep=Keep.TOP)

    # Sketch8 → Cut-Extrude4 (cut)
    with BuildSketch(Plane(origin=(0, 0, -17.5), x_dir=(-1, 0, 0), z_dir=(0, 0, -1))):
        with Locations((0, 22)):
            Circle(SKETCH8_R)
    extrude(amount=-CUT_EXTRUDE4_DEPTH, mode=Mode.SUBTRACT)


solid = Compound([body_2.part, part_1.part])
